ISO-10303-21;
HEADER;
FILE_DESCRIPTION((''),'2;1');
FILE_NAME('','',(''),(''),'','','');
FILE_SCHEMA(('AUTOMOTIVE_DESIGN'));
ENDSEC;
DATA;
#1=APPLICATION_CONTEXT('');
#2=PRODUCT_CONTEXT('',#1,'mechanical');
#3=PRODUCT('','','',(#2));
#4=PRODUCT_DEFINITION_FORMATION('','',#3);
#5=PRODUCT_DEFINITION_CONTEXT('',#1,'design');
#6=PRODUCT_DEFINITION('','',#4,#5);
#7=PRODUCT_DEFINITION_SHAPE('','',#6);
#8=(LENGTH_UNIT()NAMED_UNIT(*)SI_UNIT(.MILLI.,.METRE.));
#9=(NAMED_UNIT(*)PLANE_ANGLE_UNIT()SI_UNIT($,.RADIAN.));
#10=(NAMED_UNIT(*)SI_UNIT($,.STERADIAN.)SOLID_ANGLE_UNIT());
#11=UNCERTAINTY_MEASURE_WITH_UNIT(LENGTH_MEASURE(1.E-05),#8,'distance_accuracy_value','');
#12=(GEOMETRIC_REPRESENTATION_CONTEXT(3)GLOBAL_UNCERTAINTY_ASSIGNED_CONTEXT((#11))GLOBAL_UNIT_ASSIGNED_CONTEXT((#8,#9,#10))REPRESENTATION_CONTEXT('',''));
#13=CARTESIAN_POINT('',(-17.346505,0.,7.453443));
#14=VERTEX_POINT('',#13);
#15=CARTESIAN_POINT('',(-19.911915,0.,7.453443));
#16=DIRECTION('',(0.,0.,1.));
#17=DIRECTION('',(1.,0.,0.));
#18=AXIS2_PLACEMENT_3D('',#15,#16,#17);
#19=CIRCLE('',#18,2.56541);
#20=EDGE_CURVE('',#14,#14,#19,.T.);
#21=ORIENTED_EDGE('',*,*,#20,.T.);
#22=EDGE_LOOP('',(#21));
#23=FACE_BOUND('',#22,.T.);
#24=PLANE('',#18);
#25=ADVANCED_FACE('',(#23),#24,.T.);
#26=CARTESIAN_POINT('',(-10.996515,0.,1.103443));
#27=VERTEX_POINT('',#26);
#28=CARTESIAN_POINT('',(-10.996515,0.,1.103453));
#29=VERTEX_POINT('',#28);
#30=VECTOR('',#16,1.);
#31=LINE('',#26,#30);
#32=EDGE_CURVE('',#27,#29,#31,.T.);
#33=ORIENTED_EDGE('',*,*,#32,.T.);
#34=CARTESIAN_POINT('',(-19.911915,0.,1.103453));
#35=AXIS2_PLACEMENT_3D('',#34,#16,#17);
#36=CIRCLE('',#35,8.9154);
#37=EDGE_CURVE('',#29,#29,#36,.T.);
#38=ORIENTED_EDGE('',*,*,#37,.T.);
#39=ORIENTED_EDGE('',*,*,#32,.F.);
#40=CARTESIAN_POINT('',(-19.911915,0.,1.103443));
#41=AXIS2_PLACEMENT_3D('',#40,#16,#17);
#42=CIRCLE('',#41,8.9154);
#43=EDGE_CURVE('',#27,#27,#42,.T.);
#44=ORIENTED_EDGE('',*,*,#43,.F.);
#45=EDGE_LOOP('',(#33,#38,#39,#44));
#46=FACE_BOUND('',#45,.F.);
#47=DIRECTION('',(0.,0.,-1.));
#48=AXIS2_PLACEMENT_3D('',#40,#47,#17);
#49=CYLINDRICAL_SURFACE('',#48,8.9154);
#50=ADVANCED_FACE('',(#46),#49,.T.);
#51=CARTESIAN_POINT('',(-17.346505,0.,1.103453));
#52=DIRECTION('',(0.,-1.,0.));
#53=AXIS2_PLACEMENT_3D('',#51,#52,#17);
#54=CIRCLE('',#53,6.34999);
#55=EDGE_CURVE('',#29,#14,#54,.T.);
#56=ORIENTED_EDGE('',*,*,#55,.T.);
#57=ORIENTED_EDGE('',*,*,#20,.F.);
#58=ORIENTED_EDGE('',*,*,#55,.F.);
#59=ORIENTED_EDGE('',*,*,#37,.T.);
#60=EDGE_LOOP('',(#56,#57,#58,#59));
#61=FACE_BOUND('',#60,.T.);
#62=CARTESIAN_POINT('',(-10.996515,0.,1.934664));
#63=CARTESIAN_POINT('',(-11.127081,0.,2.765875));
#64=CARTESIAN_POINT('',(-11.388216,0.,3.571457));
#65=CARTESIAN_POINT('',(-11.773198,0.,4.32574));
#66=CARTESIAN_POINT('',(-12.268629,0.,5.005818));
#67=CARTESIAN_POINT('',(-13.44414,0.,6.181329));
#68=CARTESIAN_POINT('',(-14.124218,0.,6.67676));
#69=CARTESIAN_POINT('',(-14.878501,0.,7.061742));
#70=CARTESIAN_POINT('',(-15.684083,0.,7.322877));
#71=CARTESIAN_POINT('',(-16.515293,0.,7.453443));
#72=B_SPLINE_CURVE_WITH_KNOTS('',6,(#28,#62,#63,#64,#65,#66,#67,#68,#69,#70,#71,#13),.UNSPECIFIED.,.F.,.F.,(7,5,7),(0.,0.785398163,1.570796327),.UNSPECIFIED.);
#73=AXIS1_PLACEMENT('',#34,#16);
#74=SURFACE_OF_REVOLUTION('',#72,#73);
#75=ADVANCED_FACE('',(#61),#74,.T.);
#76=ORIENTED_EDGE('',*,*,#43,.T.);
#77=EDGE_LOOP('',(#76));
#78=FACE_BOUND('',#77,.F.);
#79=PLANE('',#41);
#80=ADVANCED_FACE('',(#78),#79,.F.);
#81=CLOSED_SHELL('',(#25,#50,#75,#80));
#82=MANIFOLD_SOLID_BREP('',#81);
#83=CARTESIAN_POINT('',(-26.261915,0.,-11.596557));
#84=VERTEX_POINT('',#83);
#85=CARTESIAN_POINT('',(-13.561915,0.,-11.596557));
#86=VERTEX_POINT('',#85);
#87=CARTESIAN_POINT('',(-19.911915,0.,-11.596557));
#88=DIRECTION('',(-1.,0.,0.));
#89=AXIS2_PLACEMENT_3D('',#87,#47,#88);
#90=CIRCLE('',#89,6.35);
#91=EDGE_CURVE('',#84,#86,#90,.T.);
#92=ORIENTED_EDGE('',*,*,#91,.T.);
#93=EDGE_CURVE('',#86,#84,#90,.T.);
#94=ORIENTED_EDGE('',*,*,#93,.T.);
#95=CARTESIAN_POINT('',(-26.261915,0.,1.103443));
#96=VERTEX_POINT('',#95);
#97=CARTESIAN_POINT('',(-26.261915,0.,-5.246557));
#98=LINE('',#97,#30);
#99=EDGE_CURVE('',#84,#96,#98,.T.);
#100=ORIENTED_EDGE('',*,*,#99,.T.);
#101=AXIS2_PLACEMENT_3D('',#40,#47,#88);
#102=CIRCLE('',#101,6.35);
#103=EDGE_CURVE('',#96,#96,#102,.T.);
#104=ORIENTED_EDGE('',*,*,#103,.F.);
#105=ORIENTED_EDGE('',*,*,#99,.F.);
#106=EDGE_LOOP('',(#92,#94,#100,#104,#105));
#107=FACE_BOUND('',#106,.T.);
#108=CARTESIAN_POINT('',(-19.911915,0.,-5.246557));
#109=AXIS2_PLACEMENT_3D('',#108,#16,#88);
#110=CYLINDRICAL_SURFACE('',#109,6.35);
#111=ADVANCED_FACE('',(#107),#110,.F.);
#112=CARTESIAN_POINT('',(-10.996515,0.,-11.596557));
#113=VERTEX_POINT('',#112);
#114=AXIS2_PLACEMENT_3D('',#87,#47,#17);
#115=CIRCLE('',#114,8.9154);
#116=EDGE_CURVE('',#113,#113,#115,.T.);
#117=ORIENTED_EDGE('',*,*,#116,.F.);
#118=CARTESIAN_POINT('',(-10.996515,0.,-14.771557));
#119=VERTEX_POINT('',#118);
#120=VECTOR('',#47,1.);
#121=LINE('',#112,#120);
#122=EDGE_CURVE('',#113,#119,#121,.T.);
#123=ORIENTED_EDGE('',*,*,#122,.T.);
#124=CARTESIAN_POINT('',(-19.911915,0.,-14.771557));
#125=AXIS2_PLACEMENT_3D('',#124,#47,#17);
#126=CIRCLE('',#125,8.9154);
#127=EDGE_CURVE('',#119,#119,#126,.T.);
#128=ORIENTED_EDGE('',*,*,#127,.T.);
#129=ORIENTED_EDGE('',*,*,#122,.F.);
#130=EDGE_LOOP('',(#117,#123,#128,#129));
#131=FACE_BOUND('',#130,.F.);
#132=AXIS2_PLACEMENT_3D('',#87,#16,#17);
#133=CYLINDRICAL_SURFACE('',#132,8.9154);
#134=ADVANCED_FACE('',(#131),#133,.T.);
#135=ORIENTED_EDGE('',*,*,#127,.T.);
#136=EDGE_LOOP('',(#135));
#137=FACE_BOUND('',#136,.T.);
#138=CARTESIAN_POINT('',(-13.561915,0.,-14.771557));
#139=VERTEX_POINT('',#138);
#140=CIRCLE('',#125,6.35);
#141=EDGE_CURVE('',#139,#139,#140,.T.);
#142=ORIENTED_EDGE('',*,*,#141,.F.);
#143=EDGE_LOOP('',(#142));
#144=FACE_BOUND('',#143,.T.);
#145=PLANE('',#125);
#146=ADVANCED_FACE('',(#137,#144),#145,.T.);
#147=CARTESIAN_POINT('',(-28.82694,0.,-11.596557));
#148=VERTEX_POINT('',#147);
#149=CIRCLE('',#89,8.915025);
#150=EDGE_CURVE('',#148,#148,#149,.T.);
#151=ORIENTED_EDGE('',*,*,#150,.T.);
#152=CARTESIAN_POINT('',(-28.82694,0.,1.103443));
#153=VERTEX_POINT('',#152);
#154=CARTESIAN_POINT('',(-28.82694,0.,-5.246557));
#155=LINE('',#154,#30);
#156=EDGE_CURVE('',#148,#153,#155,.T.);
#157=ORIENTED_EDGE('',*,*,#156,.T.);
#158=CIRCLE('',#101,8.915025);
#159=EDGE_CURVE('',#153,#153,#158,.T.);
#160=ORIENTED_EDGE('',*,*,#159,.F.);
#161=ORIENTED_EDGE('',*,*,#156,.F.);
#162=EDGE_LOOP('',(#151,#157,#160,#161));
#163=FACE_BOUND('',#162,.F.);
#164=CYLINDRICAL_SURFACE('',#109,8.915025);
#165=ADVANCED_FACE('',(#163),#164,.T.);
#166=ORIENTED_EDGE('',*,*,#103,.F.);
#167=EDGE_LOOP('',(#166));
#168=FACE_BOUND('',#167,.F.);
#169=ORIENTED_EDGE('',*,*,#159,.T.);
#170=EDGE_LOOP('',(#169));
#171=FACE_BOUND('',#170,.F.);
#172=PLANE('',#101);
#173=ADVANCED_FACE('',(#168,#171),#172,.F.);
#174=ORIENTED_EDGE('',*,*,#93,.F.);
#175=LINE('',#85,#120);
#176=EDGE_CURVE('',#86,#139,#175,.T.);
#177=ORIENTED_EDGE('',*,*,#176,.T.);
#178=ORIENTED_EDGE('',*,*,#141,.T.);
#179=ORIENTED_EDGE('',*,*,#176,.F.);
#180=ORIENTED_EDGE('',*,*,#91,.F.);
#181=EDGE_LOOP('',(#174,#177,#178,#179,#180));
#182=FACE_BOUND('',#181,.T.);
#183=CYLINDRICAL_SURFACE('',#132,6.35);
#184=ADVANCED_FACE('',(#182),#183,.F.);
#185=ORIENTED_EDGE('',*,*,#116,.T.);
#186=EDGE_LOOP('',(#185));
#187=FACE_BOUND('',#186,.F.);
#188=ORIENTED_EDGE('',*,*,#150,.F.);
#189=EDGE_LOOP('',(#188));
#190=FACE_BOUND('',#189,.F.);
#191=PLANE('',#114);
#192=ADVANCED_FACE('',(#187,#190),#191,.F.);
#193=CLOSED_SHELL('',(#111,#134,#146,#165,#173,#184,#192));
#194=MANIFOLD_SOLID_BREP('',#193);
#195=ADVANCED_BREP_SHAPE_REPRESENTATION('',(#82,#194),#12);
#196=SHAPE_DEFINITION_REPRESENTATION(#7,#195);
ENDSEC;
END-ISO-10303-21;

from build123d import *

# Parameters (mm, degrees)
F0_W     = 2.5650248432
F0_H     = 12.7
F2_R     = 8.9154
F2_R_2   = 8.9150248432
F2_R_3   = 6.35
F3_DEPTH = 6.35
F4_R     = 6.34999
F5_R     = 8.9154
F5_R_2   = 8.9150248432
F5_R_3   = 6.35
F6_DEPTH = 3.175


# Not quite as in the source:
# - a fillet or chamfer is up to 0.001 mm smaller than in the source, because OpenCascade refuses the exact size


with BuildPart() as f1:
    # F0 (on Front) → F1 (revolve)
    with BuildSketch(Plane.XZ):
        with Locations((-27.5444276631, -5.2465572953)):
            Rectangle(F0_W, F0_H)
    revolve(axis=Axis((-19.9119152415, 0, -5.2465572953), (0, 0, -1)))

    # F5 (on face) → F6 (join)
    with BuildSketch(Plane(origin=(0, 0, -11.5965572953), x_dir=(1, 0, 0), z_dir=(0, 0, -1))):
        with Locations((-19.9119152415, 0)):
            Circle(F5_R)
        with Locations((-19.9119152415, 0)):
            Circle(F5_R_2, mode=Mode.SUBTRACT)
        with Locations((-19.9119152415, 0)):
            Circle(F5_R_2)
        with Locations((-19.9119152415, 0)):
            Circle(F5_R_3, mode=Mode.SUBTRACT)
    extrude(amount=F6_DEPTH)


with BuildPart() as f3:
    # F2 (on face) → F3 (new body)
    with BuildSketch(Plane.XY.offset(1.1034427047)):
        with Locations((-19.9119152415, 0)):
            Circle(F2_R)
        with Locations((-19.9119152415, 0)):
            Circle(F2_R_2, mode=Mode.SUBTRACT)
        with Locations((-19.9119152415, 0)):
            Circle(F2_R_2)
        with Locations((-19.9119152415, 0)):
            Circle(F2_R_3, mode=Mode.SUBTRACT)
        with Locations((-19.9119152415, 0)):
            Circle(F2_R_3)
    extrude(amount=F3_DEPTH)

    # F4 (radius 6.35 in the source; OpenCascade refuses exactly that, so slightly less here)
    f4_edges = [f3.edges().sort_by_distance(p)[0] for p in [
        (-28.827315, 0, 7.453443),
    ]]
    fillet(f4_edges, radius=F4_R)


solid = Compound([f1.part, f3.part])
